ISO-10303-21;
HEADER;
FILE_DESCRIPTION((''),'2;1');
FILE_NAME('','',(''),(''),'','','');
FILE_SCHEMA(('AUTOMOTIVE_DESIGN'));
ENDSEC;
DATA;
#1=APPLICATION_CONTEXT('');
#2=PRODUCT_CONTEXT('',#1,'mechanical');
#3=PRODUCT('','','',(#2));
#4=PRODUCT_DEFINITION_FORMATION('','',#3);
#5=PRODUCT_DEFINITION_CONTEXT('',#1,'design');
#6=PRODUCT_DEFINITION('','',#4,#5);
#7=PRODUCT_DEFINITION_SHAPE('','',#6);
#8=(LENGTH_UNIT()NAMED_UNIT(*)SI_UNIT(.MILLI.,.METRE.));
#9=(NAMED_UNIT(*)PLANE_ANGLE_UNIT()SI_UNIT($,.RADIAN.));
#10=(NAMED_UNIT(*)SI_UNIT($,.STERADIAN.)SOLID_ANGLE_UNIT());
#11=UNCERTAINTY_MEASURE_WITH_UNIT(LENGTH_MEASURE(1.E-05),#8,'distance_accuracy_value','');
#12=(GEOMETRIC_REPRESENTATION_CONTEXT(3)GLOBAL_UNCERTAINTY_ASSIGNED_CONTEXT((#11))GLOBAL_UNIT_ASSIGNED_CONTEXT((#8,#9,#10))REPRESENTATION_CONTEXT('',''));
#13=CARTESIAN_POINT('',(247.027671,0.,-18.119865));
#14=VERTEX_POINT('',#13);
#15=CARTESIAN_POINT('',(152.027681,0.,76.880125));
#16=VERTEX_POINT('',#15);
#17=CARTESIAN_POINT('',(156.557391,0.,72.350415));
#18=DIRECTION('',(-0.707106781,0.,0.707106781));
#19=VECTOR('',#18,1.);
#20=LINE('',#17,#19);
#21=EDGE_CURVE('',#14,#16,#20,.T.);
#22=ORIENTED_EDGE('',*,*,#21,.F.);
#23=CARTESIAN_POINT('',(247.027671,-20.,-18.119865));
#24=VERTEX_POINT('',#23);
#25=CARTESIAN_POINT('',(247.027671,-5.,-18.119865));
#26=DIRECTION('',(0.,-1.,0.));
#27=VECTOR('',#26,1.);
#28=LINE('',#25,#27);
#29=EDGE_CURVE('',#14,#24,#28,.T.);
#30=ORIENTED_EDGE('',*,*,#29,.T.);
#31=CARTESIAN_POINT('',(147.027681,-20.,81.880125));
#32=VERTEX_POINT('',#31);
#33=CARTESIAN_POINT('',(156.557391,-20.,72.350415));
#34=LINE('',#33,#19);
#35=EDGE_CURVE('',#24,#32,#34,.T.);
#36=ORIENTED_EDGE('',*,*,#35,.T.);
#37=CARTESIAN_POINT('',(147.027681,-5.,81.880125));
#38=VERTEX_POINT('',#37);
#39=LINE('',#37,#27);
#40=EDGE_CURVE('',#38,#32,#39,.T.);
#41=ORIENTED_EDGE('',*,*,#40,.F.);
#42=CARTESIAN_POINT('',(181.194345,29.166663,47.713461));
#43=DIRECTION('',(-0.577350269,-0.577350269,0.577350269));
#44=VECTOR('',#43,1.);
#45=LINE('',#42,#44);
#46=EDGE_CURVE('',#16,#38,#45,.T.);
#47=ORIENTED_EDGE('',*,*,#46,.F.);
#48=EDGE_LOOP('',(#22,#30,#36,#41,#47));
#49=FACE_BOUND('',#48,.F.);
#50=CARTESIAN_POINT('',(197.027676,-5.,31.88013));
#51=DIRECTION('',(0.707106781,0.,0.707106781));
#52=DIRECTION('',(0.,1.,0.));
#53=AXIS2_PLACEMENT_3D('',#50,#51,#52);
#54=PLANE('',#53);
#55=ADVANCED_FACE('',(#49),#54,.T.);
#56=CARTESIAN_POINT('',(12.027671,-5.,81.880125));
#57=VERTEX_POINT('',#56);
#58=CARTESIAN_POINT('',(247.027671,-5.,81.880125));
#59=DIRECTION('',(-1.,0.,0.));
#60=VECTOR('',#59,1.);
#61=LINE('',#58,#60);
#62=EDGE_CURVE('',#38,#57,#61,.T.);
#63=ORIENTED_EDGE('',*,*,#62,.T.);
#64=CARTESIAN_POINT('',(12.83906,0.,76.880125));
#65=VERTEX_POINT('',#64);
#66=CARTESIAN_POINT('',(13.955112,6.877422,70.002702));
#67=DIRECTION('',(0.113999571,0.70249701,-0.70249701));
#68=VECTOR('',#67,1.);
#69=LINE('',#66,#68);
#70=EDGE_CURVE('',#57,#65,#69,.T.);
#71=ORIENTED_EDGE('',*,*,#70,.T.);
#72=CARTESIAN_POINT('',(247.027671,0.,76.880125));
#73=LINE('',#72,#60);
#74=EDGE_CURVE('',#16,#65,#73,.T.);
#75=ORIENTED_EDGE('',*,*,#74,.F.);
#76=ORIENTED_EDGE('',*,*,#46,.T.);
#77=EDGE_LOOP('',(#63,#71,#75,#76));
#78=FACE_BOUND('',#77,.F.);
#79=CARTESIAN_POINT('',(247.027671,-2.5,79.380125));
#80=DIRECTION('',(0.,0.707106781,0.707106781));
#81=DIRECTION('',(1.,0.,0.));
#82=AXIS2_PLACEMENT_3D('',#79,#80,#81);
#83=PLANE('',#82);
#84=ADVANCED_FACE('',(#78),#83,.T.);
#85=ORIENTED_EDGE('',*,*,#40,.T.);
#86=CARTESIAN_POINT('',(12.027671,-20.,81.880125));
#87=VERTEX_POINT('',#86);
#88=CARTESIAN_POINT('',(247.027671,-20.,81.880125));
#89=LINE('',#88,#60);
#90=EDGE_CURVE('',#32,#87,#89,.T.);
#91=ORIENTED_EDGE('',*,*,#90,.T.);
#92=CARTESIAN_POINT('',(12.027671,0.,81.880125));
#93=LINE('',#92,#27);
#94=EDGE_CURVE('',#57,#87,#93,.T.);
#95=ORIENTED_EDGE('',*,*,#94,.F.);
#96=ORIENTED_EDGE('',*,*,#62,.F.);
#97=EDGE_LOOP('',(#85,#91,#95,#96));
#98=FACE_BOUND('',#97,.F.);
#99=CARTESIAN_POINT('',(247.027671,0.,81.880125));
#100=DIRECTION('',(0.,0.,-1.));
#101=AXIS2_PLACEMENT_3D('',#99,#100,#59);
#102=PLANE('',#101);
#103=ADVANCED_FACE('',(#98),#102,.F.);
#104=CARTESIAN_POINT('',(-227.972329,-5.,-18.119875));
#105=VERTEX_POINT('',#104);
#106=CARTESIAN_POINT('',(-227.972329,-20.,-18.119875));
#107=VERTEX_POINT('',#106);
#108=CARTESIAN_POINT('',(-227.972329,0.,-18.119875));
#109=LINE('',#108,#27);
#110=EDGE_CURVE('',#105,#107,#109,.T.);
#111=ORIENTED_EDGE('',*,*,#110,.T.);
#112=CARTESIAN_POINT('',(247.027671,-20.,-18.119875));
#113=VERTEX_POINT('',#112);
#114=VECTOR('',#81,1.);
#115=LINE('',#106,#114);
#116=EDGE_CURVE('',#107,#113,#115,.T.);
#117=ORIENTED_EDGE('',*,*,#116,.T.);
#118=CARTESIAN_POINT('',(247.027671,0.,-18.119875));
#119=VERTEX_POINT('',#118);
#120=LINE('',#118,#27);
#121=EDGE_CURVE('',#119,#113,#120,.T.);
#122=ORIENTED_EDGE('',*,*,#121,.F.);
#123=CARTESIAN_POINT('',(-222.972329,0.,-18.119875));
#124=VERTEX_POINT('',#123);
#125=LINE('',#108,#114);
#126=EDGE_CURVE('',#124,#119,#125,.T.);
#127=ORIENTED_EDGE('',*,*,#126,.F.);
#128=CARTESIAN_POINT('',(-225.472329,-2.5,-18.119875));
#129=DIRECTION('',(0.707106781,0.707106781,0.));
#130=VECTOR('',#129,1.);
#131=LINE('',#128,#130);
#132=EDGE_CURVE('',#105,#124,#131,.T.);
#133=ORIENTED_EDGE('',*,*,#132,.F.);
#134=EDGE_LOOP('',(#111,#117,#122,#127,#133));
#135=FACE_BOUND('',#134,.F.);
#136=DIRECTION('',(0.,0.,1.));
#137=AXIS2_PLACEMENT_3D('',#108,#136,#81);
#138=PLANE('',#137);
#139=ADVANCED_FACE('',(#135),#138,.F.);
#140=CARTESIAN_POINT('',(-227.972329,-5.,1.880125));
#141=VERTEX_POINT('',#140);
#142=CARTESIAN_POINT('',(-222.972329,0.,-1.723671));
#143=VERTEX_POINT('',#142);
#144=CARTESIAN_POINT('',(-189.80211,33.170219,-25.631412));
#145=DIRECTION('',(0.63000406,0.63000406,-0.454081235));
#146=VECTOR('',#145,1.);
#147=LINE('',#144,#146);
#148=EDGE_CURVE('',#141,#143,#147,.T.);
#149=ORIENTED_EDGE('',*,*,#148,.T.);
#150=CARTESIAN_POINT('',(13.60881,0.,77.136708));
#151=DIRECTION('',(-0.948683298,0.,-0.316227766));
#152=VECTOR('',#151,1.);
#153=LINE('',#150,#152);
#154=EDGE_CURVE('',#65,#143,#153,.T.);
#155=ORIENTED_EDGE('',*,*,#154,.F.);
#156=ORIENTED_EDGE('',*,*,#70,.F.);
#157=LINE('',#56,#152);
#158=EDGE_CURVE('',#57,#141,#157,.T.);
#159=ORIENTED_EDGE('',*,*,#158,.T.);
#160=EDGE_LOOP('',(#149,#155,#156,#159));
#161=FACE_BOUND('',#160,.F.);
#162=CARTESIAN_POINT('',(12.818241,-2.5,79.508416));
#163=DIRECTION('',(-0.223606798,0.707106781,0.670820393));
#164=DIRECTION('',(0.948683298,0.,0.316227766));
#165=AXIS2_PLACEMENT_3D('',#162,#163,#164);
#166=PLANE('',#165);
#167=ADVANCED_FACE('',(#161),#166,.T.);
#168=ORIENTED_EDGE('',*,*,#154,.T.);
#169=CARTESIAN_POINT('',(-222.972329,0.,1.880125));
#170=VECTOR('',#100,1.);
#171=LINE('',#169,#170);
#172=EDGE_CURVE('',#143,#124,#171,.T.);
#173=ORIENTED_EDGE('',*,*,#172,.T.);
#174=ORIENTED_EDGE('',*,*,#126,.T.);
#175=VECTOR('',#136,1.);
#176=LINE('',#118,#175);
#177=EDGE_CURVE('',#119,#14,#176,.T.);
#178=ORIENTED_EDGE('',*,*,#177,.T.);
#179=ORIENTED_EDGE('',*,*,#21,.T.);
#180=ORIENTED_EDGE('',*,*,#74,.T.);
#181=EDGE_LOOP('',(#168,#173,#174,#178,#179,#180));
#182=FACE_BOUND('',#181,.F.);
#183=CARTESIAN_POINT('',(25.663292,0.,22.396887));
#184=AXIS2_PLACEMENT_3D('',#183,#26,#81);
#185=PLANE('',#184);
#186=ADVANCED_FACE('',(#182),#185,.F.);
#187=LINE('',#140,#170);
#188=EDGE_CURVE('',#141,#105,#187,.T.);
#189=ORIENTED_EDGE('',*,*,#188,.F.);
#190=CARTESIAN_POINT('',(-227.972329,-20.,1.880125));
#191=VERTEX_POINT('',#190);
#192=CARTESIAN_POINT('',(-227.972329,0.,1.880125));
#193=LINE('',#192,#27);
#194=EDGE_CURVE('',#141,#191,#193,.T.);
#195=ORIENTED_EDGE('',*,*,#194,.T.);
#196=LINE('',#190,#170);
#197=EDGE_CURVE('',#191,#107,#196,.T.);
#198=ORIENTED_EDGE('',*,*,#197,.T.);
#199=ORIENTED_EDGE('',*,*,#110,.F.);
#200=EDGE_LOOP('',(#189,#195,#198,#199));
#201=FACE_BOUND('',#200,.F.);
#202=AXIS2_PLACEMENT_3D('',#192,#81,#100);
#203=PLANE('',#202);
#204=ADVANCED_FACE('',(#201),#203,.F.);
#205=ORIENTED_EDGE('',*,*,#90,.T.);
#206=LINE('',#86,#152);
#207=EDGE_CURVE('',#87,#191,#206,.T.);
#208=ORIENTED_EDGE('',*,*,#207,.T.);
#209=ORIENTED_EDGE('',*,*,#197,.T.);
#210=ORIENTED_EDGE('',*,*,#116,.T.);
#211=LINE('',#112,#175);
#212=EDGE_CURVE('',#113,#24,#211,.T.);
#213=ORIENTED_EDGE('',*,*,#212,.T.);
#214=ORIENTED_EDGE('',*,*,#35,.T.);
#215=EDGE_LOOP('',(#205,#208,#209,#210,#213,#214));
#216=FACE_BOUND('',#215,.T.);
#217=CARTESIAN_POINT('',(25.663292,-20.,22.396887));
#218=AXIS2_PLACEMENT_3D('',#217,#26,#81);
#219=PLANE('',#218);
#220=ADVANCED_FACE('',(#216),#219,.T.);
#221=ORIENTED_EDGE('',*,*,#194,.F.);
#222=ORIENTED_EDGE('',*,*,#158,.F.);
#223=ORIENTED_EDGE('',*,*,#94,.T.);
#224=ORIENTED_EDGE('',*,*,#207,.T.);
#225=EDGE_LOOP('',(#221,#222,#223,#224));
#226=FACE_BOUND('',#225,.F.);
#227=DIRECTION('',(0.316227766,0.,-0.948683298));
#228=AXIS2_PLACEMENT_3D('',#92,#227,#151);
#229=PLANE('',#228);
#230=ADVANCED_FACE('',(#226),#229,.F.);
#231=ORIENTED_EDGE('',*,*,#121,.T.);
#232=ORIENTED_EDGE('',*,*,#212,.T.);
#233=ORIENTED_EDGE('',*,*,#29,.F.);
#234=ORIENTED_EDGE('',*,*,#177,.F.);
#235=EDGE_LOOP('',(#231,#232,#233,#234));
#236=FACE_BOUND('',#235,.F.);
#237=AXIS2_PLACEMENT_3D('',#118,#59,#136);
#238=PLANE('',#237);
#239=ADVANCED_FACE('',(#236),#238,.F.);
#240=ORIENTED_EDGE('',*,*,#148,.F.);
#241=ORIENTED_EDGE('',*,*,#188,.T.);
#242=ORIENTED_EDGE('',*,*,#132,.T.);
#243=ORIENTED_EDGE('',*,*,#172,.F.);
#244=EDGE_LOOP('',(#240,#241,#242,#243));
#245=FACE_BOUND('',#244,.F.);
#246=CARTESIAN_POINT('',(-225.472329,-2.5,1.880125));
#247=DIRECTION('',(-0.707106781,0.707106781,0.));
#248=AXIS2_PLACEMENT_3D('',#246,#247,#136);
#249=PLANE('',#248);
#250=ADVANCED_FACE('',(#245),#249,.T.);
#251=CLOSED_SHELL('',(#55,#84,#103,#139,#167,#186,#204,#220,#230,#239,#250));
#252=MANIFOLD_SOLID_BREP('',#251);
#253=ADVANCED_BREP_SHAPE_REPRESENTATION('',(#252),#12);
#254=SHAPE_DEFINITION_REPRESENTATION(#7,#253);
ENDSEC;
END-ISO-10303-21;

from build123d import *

# Parameters (mm, degrees)
F1_DEPTH = 20
F2_SIZE  = 5
F3_SIZE  = 99.99999


# Not quite as in the source:
# - a fillet or chamfer is up to 0.001 mm smaller than in the source, because OpenCascade refuses the exact size


with BuildPart() as f1:
    # F0 (on Front) → F1 (new body)
    with BuildSketch(Plane.XZ):
        Polygon((-227.9723286629, -18.1198753417), (247.0276713371, -18.1198753417), (247.0276713371, 81.8801246583), (12.0276713371, 81.8801246583), (-227.9723286629, 1.8801246583), align=None)
    extrude(amount=F1_DEPTH)

    # F2
    f2_edges = [f1.edges().sort_by_distance(p)[0] for p in [
        (129.527671, 0, 81.880125),
        (-107.972329, 0, 41.880125),
        (-227.972329, 0, -8.119875),
    ]]
    chamfer(f2_edges, length=F2_SIZE)

    # F3 (size 100 in the source; OpenCascade refuses exactly that, so slightly less here)
    f3_edges = [f1.edges().sort_by_distance(p)[0] for p in [
        (247.027671, -12.5, 81.880125),
    ]]
    chamfer(f3_edges, length=F3_SIZE)


solid = f1.part
